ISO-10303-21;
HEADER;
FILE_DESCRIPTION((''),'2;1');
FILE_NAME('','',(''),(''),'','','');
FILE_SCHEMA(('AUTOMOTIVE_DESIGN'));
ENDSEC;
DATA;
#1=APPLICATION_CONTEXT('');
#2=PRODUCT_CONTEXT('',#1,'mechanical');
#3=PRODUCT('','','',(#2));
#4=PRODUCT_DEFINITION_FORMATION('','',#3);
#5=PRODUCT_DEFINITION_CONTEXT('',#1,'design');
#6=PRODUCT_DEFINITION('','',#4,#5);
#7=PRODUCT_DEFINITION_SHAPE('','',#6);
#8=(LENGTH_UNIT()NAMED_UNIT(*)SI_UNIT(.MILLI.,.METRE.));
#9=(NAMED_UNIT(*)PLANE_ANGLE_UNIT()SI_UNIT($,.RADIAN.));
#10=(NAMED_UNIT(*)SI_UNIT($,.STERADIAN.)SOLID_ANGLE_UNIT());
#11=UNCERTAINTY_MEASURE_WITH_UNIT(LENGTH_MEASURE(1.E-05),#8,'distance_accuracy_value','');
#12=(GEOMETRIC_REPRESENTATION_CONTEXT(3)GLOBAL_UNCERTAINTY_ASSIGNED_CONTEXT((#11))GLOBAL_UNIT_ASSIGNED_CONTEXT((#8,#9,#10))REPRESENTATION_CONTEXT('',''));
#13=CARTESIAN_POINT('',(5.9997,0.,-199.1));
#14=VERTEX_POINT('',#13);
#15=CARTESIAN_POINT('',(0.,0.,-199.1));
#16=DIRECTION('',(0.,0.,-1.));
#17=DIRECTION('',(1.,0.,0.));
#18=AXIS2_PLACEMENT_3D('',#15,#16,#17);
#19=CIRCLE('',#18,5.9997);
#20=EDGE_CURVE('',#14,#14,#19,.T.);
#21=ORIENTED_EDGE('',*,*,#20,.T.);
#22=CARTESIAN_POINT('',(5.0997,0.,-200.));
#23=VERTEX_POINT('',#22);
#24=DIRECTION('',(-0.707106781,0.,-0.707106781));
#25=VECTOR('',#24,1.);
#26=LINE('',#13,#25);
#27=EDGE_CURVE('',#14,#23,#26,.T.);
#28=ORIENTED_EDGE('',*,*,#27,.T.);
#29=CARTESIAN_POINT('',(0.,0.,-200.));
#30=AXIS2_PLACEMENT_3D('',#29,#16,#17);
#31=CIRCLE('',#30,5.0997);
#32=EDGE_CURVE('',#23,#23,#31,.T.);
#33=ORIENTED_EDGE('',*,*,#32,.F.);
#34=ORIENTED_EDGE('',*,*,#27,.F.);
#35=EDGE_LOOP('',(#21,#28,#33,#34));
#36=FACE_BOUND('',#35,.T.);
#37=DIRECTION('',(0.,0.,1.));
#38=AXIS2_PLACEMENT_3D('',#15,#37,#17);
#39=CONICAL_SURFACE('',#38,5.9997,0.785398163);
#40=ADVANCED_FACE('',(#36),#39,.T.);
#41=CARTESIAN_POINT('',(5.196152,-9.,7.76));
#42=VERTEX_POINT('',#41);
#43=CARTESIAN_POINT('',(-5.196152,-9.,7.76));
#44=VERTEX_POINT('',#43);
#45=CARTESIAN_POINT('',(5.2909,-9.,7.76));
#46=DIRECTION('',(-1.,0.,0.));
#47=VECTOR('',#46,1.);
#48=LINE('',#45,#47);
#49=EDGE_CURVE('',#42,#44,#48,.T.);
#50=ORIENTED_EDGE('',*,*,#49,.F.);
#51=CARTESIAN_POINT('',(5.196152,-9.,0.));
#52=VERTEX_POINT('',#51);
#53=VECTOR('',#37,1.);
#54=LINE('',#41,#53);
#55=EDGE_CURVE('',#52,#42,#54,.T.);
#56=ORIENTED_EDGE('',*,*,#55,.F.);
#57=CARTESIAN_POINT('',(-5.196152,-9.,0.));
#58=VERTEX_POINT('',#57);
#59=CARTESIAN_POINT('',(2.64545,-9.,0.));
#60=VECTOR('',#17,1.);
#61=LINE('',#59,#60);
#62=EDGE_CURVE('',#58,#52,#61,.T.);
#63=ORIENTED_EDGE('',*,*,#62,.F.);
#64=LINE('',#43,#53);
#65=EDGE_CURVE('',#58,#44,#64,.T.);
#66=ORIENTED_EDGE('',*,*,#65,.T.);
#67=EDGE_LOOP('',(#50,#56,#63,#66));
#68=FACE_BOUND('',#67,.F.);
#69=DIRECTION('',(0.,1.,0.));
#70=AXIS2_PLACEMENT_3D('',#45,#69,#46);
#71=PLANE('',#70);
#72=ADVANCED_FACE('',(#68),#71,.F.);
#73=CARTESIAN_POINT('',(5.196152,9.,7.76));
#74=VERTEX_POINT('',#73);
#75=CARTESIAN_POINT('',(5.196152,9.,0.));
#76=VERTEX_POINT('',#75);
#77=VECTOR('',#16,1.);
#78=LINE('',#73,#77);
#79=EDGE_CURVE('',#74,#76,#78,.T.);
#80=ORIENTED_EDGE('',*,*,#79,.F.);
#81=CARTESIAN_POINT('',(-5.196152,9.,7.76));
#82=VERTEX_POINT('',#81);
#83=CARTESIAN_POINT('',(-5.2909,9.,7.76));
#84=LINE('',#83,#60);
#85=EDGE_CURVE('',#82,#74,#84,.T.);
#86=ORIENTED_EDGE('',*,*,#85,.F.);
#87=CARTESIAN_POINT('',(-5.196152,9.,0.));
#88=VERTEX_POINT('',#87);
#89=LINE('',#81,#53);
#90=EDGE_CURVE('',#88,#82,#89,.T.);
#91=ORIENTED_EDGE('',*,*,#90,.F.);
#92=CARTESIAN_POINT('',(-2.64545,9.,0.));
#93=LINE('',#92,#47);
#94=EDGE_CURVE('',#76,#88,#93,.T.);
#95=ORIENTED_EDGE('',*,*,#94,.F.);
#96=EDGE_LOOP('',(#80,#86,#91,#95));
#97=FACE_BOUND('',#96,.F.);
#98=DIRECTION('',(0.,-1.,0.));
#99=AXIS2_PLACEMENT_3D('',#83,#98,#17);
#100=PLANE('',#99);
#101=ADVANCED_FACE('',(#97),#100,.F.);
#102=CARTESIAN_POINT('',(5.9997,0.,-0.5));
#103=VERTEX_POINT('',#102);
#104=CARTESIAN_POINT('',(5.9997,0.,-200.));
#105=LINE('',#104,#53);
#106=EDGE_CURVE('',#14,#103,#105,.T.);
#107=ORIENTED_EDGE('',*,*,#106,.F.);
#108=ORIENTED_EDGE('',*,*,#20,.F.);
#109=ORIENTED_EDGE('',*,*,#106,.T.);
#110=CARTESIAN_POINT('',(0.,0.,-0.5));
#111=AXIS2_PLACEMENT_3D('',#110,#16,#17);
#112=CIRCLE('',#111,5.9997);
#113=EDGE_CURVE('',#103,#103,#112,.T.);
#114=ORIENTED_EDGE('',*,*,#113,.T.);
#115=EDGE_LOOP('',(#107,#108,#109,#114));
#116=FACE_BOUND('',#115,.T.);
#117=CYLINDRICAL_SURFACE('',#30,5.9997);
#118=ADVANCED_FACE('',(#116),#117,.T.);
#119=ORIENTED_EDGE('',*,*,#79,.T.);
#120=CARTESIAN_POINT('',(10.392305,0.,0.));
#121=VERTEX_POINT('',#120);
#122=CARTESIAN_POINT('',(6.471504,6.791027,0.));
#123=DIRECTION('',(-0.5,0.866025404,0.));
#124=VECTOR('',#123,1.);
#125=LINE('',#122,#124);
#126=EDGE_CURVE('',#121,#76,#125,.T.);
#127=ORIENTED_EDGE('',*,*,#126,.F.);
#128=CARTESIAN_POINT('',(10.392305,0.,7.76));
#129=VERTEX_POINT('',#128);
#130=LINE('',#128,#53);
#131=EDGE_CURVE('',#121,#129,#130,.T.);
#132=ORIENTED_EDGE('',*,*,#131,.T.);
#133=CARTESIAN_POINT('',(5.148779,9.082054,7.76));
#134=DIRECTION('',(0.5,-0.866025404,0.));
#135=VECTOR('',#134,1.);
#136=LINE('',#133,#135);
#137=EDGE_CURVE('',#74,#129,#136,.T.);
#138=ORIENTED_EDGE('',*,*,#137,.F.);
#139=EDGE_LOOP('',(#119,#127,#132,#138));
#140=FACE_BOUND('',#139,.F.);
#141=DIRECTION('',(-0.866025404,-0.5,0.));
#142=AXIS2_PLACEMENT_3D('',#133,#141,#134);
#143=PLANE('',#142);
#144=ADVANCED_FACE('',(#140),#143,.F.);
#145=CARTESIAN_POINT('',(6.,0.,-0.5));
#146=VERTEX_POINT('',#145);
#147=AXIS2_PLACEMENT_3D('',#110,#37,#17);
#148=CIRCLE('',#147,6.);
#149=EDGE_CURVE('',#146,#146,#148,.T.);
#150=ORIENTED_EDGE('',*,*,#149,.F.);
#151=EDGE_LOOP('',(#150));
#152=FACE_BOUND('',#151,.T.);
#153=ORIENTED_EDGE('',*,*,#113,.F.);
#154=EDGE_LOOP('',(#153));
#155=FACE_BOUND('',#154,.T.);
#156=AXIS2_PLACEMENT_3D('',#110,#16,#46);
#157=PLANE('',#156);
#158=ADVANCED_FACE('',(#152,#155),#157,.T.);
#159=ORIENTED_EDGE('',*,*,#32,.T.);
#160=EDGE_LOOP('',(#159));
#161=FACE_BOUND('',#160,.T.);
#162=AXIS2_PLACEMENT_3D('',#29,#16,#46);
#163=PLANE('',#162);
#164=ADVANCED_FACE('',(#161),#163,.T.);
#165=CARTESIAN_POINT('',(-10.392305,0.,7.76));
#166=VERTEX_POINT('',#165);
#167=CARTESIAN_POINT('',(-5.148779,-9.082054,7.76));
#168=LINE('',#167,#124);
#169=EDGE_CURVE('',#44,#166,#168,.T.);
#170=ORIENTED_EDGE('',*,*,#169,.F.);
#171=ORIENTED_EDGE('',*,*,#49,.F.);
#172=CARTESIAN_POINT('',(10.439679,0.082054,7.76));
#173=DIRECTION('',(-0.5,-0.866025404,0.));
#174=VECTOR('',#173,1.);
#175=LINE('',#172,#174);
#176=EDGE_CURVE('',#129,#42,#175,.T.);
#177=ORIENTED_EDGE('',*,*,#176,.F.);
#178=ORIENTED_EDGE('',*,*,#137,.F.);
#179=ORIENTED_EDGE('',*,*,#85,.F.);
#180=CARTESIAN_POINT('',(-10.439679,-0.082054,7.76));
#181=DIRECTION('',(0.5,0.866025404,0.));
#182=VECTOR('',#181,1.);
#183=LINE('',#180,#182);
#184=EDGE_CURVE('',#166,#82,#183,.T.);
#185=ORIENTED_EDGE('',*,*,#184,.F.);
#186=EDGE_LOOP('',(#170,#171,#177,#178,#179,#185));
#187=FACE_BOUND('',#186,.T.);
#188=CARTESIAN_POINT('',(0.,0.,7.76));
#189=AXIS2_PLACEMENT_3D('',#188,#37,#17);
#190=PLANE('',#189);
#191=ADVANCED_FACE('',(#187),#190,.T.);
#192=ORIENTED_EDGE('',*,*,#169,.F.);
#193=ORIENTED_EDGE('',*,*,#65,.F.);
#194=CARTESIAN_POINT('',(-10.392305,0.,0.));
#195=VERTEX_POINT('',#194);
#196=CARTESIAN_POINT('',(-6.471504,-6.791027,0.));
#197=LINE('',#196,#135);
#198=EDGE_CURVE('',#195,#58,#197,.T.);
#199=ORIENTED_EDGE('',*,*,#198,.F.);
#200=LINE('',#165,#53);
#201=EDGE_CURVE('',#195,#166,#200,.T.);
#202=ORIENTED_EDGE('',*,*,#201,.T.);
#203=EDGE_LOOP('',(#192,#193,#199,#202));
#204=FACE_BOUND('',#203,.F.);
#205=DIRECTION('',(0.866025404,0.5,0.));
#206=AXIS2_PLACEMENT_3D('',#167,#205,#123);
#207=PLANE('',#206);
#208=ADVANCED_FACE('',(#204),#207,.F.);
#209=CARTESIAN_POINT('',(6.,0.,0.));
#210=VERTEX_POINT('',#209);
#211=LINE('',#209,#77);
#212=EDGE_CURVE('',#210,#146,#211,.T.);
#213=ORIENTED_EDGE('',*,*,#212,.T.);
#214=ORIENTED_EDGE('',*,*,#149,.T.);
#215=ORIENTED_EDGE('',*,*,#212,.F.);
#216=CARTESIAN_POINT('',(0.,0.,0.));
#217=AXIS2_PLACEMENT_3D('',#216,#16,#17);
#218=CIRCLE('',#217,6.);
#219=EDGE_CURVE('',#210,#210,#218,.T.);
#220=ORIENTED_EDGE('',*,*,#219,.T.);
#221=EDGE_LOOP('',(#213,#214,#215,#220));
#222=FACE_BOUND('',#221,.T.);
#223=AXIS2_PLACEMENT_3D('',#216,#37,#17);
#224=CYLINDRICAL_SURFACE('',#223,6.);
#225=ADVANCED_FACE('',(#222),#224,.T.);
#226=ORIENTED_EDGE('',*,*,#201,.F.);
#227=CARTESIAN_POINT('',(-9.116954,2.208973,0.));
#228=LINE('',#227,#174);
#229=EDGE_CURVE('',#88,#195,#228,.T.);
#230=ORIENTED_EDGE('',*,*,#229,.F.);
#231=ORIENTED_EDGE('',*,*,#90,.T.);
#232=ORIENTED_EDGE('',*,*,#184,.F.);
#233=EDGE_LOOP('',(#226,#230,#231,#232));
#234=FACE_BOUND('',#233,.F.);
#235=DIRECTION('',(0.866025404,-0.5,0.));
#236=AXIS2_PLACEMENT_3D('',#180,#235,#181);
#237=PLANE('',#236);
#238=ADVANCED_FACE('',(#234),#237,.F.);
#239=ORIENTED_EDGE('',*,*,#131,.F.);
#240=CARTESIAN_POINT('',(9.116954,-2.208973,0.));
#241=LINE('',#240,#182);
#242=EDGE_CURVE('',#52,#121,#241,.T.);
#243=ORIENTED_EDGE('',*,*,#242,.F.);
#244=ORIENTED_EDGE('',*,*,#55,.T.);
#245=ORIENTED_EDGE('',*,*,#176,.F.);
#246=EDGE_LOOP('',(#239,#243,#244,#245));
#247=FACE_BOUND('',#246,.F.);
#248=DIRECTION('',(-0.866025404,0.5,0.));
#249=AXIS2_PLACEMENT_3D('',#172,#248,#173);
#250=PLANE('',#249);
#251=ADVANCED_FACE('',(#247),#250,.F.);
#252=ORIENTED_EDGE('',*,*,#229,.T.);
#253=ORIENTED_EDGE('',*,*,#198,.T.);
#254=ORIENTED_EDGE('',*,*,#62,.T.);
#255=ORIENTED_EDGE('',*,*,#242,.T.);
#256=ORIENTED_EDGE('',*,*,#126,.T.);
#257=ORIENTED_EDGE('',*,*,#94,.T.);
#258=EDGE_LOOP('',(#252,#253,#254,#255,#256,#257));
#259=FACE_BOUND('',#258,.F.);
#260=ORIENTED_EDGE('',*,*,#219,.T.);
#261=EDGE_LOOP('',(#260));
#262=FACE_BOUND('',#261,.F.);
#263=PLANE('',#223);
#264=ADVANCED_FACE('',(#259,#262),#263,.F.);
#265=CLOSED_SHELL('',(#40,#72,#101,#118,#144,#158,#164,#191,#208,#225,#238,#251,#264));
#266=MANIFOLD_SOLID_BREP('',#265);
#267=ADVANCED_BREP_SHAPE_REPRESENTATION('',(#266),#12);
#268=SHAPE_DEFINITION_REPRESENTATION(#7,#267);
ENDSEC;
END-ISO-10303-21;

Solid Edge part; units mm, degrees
sketch "Sketch1" plane through (0, 0, 0) normal (0, 0, 1) x (1, 0, 0)
  circle A0 centre (0, 0) radius 10.44
  dimension "D1" = 20.88
extrude "Protrusion1" add sketch "Sketch1" along normal blind 7.76
sketch "Sketch2" plane through (0, 0, 0) normal (0, 0, -1) x (1, 0, 0)
  circle A0 centre (0, 0) radius 6
extrude "Protrusion2" add sketch "Sketch2" along normal blind 200
sketch "Sketch3" plane through (0, 0, -200) normal (0, 0, -1) x (1, 0, 0)
  circle A0 centre (0, 0) radius 5.9997
extrude "Cutout1" cut sketch "Sketch3" against normal blind 199.5 flip side to cut
chamfer "Chamfer_1" distance 0.9 angle 45 1 edges at (-5.9997, 0, -200)
sketch "Sketch4" plane through (0, 0, 7.76) normal (0, 0, 1) x (1, 0, 0)
  line L0 (-5.2909, 9) -> (5.2909, 9)
  dimension "D1" = 18
extrude "Cutout2" cut sketch "Sketch4" against normal up to next material side at (0, 9.05, 7.76)
pattern_circular "Pattern1" count 6 over 360 about axis through (0, 0, 7.76) along (0, 0, 1) of "Cutout2"
properties part number "108473"
